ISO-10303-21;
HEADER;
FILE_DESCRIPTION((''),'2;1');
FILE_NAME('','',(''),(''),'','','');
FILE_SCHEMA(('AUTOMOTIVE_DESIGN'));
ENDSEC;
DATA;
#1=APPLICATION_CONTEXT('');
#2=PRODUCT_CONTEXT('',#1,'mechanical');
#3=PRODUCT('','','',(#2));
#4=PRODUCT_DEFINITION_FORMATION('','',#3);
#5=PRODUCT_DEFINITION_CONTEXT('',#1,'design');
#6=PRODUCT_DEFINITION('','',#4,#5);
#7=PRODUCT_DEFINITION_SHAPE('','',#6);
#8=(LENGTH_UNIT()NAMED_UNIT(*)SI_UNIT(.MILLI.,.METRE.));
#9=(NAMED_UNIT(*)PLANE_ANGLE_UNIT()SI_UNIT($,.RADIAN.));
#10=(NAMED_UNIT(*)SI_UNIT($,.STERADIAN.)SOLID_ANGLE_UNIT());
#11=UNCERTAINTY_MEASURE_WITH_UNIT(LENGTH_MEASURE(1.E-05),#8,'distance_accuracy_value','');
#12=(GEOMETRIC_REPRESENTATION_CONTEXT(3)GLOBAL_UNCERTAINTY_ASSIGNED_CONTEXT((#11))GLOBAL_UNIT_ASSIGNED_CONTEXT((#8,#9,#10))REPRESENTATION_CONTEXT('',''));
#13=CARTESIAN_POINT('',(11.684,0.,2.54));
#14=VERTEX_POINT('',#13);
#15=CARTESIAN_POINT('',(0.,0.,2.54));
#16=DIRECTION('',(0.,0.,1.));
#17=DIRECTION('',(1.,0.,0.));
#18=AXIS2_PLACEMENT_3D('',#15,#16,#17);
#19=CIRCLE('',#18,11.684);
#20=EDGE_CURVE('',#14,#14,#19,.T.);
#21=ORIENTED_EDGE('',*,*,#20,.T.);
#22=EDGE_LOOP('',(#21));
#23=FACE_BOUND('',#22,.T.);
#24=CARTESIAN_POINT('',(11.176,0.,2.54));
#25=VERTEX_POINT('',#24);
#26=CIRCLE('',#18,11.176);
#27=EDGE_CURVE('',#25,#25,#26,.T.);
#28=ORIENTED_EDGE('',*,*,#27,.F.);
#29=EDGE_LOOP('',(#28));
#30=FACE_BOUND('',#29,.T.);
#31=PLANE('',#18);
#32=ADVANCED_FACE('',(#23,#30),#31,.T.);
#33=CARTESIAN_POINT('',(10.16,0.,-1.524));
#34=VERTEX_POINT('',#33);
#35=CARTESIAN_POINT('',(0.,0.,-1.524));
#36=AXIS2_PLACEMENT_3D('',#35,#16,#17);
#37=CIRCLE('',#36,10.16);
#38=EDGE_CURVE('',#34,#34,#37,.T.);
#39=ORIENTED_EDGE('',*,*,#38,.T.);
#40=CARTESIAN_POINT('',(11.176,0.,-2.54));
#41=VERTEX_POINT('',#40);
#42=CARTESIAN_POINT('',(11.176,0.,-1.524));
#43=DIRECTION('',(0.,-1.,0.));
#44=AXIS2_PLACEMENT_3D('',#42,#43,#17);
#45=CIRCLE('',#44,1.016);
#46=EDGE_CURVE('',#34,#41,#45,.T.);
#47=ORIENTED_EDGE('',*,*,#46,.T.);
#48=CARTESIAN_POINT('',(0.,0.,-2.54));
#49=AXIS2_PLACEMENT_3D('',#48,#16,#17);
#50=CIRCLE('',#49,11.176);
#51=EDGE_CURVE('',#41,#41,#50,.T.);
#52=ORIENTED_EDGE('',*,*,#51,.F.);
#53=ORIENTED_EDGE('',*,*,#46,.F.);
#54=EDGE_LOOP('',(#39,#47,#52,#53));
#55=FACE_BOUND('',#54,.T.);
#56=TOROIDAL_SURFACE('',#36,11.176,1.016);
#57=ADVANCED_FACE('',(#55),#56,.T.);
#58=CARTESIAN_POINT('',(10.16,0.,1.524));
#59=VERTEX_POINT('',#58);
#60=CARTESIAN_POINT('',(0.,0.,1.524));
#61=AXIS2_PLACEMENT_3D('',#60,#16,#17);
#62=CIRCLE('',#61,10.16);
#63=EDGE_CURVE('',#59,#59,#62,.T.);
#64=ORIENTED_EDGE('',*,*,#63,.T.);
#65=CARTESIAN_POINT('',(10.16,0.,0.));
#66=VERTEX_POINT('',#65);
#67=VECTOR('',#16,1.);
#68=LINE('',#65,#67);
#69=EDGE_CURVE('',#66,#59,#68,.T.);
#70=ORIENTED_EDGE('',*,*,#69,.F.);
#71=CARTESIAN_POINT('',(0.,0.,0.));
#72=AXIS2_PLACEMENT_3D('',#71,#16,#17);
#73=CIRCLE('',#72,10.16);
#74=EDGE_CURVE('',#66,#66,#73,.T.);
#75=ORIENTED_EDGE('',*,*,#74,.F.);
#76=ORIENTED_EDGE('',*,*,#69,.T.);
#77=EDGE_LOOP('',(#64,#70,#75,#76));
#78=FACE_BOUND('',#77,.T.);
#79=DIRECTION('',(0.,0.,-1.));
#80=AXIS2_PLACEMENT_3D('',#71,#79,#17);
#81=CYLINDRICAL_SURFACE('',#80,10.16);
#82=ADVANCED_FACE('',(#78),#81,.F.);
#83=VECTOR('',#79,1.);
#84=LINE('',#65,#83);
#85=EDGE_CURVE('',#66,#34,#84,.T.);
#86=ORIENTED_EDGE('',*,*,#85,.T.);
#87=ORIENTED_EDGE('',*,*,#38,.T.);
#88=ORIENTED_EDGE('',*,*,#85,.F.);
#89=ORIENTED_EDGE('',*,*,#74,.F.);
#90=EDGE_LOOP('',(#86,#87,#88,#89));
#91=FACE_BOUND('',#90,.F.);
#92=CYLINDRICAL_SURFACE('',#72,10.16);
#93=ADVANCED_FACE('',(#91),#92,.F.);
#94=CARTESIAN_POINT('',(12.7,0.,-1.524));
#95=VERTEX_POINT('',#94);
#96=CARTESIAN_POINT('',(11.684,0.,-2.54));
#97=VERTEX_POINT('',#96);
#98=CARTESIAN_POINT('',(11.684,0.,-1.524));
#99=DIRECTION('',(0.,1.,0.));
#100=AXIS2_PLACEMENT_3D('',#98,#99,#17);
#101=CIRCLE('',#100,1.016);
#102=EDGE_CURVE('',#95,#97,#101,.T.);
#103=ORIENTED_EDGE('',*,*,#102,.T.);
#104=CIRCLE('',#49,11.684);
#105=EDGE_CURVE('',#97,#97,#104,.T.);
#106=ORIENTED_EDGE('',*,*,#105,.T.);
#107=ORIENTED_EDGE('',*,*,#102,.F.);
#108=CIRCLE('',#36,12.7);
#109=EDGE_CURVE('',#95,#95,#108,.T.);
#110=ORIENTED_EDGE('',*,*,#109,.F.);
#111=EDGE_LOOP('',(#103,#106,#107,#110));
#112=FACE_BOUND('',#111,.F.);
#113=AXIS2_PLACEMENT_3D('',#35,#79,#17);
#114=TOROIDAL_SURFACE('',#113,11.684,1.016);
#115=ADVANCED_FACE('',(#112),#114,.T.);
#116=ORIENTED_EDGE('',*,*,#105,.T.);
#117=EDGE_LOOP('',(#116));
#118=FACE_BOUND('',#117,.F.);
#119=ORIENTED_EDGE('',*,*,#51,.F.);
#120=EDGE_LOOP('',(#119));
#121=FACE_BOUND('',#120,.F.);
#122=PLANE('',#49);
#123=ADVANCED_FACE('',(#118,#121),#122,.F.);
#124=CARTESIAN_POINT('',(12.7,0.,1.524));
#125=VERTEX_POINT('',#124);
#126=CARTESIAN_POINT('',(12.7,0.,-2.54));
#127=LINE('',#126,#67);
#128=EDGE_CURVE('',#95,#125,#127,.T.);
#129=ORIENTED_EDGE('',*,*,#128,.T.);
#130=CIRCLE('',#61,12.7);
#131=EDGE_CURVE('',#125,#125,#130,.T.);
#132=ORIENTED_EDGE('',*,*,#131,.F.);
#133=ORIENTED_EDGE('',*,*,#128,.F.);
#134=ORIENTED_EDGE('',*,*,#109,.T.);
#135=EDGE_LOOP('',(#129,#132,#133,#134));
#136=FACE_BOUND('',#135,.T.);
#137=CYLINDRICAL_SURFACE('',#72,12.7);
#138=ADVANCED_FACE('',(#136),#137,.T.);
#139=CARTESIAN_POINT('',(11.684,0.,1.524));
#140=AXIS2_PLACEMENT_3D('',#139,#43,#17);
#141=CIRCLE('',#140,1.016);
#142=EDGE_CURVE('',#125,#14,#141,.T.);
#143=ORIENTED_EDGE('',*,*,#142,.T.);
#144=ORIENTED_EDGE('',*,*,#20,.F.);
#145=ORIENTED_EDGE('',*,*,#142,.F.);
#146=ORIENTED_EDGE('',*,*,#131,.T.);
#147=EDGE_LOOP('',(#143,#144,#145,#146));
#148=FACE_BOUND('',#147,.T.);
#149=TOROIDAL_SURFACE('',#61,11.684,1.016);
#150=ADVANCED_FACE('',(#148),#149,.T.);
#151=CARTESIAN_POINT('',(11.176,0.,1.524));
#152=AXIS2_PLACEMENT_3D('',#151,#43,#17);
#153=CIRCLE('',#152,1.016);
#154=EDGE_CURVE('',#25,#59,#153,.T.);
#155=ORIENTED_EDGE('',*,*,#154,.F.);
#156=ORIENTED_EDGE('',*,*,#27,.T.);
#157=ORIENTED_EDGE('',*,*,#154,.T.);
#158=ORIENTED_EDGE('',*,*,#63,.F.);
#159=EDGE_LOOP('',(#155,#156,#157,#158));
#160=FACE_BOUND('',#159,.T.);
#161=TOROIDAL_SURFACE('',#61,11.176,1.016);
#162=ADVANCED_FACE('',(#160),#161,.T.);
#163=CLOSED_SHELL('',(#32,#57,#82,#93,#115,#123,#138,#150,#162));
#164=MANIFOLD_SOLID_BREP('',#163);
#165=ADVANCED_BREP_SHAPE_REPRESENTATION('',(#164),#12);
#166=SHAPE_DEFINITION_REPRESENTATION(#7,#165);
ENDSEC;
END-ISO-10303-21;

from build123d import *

# Parameters (mm, degrees)
F0_R          = 12.7
F0_R_2        = 10.16
F1_DEPTH      = 2.54
F1_DEPTH_BACK = 2.54
F2_R          = 1.016


with BuildPart() as f1:
    # F0 (on Top) → F1 (new body, two sides)
    with BuildSketch(Plane.XY) as f1_sk:
        Circle(F0_R)
        Circle(F0_R_2, mode=Mode.SUBTRACT)
    extrude(amount=F1_DEPTH)
    extrude(f1_sk.sketch, amount=-F1_DEPTH_BACK)

    # F2
    f2_edges = [f1.edges().sort_by_distance(p)[0] for p in [
        (12.7, 0, -1.27),
        (-12.7, 0, 0),
        (-12.7, 0, -2.54),
        (10.16, 0, -1.27),
        (-10.16, 0, 0),
        (-10.16, 0, -2.54),
        (-12.7, 0, 2.54),
        (-10.16, 0, 2.54),
    ]]
    fillet(f2_edges, radius=F2_R)


solid = f1.part
